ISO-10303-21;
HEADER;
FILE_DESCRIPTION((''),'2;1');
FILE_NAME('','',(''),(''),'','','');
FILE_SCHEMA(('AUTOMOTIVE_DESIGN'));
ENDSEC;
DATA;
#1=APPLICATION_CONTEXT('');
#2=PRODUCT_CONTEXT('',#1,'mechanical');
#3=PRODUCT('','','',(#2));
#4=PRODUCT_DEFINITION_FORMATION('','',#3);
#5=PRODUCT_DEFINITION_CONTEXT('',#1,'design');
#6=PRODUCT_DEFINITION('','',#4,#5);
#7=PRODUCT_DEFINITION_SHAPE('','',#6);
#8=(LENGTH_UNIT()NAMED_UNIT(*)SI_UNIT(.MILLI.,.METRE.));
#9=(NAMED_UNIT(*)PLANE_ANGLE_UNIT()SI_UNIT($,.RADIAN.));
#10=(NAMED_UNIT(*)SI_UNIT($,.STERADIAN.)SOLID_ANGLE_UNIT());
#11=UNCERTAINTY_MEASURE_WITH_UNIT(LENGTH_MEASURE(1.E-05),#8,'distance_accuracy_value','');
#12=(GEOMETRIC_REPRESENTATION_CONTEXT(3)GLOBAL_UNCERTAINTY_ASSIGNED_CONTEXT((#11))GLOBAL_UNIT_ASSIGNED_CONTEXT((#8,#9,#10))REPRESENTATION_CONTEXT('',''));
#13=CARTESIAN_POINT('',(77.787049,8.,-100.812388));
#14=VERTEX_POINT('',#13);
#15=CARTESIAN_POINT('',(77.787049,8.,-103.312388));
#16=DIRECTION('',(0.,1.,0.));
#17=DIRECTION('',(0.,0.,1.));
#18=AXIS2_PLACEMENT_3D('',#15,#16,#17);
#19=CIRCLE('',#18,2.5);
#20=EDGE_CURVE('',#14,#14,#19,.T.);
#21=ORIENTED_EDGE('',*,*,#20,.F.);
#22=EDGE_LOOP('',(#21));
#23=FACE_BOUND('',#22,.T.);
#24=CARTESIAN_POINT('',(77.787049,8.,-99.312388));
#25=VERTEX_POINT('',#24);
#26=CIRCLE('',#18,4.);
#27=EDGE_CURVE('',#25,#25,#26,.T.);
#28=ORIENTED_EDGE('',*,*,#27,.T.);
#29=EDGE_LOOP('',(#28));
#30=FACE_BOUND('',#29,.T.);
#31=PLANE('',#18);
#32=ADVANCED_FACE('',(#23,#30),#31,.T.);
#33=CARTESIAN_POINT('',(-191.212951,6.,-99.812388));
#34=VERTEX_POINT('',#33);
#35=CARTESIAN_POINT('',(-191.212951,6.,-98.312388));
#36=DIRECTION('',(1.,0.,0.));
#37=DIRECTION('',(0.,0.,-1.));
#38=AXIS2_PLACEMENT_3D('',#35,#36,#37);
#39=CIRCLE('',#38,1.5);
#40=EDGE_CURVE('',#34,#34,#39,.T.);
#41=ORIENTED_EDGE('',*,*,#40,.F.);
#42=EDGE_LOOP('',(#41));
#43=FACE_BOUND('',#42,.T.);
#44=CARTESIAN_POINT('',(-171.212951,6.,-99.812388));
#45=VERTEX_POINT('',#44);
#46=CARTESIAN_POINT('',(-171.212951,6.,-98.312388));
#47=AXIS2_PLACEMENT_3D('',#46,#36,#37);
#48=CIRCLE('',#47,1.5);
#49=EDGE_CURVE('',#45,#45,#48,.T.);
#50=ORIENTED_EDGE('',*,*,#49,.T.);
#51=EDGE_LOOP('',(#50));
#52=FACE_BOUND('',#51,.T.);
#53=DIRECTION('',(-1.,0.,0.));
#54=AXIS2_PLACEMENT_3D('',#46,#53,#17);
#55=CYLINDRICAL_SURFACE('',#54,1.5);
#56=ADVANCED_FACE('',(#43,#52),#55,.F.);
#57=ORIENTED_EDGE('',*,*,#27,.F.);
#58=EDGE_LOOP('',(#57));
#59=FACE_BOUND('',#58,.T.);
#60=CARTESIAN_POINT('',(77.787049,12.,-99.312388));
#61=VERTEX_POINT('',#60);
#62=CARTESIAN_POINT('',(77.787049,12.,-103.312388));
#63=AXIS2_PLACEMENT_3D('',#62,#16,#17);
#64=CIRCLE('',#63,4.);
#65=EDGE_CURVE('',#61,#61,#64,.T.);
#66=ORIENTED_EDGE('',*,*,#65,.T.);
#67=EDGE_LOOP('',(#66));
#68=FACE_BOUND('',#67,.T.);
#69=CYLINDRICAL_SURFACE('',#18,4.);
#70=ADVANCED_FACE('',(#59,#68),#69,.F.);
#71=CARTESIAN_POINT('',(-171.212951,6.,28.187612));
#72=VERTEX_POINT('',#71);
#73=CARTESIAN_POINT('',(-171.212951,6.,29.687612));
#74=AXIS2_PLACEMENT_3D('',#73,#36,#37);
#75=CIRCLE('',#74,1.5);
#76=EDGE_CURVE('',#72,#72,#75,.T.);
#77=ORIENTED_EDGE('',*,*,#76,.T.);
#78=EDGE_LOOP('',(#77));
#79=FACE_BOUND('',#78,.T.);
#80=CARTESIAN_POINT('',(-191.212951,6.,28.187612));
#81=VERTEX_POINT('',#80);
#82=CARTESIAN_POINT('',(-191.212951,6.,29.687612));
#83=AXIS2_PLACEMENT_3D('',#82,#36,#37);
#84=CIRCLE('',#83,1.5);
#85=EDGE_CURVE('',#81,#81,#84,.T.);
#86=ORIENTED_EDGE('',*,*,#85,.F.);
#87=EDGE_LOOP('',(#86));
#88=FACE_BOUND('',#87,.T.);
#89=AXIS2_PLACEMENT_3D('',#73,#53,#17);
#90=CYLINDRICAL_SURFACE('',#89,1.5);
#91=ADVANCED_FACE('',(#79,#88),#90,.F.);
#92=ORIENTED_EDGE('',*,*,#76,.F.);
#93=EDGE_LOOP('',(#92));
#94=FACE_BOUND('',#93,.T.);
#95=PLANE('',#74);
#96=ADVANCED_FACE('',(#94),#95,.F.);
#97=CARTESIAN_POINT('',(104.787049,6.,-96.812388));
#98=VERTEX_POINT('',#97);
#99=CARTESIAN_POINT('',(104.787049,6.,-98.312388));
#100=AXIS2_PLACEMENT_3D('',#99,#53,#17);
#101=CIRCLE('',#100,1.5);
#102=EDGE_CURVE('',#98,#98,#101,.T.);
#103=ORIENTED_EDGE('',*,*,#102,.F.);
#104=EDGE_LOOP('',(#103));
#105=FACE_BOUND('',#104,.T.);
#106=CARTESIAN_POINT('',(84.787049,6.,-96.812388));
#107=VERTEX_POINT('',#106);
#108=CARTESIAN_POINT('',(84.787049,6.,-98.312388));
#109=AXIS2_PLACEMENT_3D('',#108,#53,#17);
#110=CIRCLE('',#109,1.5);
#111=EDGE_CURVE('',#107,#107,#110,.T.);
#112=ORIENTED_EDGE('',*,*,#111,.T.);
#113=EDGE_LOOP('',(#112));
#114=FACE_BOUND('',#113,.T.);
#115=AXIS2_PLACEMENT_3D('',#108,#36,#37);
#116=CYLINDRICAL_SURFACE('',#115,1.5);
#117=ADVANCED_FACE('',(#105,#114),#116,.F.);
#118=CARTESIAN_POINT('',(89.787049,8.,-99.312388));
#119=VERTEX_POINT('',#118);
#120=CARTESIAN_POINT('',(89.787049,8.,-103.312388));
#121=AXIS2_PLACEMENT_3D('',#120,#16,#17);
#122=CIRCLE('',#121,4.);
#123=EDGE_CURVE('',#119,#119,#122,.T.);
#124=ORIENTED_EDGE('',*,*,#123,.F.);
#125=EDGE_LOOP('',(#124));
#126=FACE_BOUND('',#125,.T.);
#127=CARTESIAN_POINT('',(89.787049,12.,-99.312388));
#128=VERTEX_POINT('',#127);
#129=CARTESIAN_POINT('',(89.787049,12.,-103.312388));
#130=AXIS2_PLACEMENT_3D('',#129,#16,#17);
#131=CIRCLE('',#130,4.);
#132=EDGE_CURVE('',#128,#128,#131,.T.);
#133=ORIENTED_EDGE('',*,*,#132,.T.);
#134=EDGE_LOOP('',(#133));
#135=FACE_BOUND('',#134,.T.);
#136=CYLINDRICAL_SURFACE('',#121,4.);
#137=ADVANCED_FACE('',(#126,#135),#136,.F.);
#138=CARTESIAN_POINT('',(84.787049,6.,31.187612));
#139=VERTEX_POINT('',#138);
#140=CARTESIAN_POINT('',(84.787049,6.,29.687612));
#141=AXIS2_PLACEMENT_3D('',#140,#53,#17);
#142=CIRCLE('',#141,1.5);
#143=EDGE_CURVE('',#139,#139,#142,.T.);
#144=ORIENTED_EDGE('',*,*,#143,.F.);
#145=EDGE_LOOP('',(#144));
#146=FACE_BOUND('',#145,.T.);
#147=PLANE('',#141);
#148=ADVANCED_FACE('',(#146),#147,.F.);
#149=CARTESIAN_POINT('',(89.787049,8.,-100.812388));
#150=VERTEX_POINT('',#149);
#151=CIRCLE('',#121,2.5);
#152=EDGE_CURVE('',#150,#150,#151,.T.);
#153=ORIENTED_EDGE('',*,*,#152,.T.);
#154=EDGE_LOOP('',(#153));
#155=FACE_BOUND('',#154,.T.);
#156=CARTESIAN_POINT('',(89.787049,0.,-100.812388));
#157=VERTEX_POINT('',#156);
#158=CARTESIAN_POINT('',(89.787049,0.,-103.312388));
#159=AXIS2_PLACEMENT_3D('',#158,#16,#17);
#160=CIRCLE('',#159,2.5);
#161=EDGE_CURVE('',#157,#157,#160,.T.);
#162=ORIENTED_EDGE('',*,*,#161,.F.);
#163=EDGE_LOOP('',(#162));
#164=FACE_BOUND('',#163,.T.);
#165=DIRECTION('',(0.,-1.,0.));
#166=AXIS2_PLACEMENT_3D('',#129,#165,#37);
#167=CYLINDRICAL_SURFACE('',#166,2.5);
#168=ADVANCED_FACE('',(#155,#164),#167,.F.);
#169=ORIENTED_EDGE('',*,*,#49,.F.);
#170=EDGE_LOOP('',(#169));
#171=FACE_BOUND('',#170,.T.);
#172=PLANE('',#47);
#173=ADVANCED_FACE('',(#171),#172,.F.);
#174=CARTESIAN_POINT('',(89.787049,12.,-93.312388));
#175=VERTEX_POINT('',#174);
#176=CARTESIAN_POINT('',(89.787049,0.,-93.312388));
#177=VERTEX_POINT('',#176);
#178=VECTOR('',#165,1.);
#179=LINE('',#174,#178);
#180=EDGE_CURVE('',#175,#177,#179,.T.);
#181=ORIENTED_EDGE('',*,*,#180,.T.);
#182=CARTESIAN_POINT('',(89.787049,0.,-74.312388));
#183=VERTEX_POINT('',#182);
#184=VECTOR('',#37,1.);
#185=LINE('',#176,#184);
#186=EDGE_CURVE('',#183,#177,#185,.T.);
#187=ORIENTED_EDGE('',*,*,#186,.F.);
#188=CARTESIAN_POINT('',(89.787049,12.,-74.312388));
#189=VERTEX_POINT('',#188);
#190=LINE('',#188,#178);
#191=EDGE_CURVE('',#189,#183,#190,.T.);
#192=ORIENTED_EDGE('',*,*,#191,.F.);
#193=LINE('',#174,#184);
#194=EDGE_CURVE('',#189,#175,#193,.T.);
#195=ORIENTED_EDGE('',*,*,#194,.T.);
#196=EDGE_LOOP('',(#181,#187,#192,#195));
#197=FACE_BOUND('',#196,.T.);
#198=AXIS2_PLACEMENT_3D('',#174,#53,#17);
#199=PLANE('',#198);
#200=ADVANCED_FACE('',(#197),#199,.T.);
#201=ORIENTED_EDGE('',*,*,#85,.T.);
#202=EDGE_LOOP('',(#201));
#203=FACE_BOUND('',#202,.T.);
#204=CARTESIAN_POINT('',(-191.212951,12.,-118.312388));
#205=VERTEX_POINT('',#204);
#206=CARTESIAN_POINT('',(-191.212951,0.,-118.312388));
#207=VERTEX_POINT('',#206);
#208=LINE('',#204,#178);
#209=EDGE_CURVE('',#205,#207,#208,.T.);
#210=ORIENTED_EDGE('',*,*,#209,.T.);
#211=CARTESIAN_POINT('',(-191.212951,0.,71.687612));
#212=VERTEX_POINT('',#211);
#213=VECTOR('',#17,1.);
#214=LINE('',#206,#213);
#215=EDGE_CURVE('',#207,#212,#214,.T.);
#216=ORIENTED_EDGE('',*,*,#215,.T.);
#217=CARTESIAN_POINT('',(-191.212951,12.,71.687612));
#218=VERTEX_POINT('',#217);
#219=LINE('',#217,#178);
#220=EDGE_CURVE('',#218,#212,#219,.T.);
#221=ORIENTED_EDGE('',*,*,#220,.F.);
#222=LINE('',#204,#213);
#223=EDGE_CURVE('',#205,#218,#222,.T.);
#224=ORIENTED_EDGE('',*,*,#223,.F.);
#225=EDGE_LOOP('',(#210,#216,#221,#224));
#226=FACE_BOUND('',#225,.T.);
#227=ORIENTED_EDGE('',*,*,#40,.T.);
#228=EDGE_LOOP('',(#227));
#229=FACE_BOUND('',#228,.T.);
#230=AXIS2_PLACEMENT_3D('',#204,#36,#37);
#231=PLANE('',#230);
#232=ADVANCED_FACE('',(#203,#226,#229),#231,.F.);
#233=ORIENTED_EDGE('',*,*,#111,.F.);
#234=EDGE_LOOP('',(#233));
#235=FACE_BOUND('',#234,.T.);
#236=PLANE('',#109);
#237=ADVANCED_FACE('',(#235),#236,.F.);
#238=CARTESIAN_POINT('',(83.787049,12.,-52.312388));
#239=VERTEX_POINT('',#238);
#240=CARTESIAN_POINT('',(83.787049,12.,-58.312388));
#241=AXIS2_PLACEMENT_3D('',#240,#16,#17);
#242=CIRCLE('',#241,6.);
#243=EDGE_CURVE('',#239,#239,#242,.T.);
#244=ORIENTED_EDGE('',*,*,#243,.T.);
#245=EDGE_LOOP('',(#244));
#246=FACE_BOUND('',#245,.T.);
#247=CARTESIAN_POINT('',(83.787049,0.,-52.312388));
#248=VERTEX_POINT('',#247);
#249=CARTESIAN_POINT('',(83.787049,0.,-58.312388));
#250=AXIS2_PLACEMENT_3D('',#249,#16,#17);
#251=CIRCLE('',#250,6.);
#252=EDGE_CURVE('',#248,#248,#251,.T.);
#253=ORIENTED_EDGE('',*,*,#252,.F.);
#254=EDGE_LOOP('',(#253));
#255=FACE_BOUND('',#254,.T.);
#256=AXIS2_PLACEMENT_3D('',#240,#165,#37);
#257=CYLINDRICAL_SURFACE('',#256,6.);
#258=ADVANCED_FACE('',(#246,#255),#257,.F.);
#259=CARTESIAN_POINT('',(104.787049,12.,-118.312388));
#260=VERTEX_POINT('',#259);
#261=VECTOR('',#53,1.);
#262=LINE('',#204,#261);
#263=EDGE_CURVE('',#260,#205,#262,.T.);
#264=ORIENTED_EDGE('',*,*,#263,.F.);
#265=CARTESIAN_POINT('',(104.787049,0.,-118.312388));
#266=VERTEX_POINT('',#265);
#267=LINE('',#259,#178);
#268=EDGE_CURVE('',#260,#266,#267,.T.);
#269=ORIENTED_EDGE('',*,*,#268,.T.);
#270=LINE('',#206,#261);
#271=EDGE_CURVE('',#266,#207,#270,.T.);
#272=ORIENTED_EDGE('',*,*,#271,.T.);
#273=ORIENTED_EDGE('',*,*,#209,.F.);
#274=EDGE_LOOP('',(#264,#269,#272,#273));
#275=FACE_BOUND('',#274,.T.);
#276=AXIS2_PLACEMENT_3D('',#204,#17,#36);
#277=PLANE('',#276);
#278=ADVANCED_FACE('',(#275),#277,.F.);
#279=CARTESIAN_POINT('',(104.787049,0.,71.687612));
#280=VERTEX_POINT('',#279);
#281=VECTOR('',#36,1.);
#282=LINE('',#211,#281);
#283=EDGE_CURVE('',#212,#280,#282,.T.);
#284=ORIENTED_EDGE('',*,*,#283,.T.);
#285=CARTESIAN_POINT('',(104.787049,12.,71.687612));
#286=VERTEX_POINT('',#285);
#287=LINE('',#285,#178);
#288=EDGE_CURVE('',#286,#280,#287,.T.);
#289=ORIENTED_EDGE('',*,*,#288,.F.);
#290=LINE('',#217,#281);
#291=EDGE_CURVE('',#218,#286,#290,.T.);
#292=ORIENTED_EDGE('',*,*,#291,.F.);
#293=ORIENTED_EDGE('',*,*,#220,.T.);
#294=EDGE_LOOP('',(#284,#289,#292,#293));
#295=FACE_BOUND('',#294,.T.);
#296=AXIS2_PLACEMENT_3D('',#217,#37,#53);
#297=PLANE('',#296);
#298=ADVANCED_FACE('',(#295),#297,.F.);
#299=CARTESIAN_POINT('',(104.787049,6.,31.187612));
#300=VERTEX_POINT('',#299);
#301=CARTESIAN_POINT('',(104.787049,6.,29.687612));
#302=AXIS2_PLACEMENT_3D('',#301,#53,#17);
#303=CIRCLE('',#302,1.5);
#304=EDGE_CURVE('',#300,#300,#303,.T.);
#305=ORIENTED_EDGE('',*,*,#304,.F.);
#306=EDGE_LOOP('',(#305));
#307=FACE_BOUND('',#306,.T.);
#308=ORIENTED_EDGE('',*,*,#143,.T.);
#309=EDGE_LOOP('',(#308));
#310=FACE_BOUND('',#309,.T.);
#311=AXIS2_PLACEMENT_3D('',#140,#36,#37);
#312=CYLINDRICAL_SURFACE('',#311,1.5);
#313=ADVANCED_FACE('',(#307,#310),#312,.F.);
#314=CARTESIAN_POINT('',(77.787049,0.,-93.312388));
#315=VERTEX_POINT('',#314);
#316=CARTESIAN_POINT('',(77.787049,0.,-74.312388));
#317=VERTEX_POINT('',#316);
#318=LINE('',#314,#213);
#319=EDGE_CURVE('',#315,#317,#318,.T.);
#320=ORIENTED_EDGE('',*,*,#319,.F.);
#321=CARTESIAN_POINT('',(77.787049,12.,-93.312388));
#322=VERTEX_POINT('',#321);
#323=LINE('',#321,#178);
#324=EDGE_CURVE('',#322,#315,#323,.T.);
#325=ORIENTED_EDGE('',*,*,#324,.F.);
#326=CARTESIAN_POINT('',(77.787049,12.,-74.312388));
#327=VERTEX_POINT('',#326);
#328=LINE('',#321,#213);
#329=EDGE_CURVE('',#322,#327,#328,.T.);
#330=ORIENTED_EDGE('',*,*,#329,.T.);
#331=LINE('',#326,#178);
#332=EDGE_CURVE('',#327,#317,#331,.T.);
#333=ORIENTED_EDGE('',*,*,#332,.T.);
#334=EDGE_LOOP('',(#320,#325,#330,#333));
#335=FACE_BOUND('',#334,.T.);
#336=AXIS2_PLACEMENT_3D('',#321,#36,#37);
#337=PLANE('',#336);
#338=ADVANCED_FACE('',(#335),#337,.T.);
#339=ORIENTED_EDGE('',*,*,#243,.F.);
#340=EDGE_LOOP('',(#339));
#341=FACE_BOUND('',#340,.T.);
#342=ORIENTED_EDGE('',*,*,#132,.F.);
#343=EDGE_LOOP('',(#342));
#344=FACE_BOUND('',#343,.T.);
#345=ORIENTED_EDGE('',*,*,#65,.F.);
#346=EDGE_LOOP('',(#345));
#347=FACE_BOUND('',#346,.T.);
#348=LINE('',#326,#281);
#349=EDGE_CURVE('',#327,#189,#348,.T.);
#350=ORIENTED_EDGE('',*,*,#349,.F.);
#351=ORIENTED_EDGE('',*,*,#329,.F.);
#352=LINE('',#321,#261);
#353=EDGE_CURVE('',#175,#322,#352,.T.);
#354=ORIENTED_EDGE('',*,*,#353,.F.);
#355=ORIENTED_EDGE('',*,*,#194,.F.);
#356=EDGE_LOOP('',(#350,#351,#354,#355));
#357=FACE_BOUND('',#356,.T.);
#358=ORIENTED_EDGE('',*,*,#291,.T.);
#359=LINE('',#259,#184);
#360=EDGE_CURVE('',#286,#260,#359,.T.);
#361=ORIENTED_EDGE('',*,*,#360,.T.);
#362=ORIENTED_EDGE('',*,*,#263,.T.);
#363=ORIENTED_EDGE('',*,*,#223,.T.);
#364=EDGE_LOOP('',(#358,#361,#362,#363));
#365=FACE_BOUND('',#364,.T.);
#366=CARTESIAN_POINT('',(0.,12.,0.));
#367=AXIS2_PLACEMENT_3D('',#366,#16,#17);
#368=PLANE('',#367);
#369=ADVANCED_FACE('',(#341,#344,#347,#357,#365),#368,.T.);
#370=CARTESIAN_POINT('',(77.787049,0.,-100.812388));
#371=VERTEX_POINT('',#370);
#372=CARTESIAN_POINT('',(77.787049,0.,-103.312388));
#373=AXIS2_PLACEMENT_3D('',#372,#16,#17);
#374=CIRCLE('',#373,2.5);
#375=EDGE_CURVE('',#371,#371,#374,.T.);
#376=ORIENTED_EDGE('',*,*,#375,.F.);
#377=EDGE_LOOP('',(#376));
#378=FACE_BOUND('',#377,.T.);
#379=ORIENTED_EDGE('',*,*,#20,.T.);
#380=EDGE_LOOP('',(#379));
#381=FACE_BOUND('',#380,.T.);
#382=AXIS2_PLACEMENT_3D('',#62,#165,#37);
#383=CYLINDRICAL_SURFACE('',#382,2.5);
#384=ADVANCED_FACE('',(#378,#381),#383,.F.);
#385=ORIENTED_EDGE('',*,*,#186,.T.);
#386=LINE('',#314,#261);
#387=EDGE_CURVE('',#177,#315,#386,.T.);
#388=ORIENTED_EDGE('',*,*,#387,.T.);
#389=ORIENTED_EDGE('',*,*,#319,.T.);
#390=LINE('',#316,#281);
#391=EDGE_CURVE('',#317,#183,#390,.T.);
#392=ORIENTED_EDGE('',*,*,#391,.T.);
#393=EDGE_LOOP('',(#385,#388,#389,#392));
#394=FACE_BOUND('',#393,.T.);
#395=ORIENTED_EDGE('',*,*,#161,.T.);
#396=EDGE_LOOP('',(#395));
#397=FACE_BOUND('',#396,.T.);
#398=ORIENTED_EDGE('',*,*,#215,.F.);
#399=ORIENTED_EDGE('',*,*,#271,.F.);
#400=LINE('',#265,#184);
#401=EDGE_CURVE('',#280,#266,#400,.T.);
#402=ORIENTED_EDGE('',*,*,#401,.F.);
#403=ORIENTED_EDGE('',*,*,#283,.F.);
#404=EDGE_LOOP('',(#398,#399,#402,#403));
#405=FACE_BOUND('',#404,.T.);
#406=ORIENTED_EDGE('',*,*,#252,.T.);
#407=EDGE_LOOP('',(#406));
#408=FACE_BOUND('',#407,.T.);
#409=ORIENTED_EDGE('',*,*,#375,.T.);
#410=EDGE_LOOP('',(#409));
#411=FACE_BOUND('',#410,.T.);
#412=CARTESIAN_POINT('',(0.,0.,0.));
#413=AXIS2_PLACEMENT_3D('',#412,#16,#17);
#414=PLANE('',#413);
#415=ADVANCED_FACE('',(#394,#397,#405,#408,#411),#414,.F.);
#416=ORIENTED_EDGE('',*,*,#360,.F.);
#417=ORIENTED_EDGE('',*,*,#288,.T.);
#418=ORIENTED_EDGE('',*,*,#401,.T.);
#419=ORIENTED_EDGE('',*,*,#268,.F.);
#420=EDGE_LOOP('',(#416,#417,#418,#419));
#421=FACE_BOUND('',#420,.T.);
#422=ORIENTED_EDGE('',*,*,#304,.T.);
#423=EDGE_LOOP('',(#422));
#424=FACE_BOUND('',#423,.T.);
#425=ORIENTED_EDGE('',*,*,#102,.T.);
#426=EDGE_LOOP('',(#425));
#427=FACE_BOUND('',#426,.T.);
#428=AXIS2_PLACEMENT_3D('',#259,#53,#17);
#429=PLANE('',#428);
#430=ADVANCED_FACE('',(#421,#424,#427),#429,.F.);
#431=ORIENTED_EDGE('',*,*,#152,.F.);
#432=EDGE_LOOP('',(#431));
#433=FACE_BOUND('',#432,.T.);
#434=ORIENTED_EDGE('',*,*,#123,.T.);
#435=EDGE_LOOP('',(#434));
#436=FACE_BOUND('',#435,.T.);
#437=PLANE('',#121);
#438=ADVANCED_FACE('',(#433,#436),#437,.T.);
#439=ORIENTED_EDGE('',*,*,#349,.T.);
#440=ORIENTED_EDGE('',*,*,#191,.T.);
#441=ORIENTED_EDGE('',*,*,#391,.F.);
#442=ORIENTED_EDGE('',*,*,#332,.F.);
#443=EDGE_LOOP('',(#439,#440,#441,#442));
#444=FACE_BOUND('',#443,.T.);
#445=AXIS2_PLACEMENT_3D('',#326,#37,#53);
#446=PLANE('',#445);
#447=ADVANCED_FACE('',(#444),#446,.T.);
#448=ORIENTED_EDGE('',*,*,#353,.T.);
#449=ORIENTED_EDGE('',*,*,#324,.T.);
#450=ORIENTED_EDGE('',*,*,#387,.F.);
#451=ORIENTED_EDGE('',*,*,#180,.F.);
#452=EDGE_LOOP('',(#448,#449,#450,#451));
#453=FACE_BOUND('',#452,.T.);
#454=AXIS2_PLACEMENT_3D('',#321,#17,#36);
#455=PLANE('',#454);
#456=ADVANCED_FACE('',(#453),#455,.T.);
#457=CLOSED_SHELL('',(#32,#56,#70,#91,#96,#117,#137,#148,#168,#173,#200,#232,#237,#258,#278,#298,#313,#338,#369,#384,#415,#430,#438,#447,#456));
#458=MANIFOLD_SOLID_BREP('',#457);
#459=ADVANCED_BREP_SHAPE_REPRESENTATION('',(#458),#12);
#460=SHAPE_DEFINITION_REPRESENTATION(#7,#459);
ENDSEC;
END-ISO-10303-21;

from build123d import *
from OCP.BRepAlgoAPI import BRepAlgoAPI_Cut
from OCP.TopTools import TopTools_ListOfShape

# Parameters (mm, degrees)
SKETCH1_W           = 296
SKETCH1_H           = 190
SKETCH1_R           = 6
SKETCH1_R_2         = 2.5
SKETCH1_W_2         = 12
SKETCH1_H_2         = 19
BOSS_EXTRUDE1_DEPTH = 12
CUT_EXTRUDE2_START  = 104.787049
SKETCH3_R           = 1.5
CUT_EXTRUDE2_DEPTH  = 20
CUT_EXTRUDE3_START  = -171.212951
SKETCH3_2_R         = 1.5
CUT_EXTRUDE3_DEPTH  = 20
CUT_EXTRUDE4_START  = 12
SKETCH4_R           = 4
CUT_EXTRUDE4_DEPTH  = 4


with BuildPart() as part:
    # Sketch1 → Boss-Extrude1 (new body)
    with BuildSketch(Plane(origin=(0, 0, 0), x_dir=(1, 0, 0), z_dir=(0, 1, 0))):
        with Locations((-43.212950637, 23.312387878)):
            Rectangle(SKETCH1_W, SKETCH1_H)
        with Locations(Location((83.787049363, 58.312387878, 0), (0, 0, 270))):
            Circle(SKETCH1_R, mode=Mode.SUBTRACT)
        with Locations(Location((89.787049363, 103.312387878, 0), (0, 0, 270))):
            Circle(SKETCH1_R_2, mode=Mode.SUBTRACT)
        with Locations(Location((77.787049363, 103.312387878, 0), (0, 0, 270))):
            Circle(SKETCH1_R_2, mode=Mode.SUBTRACT)
        with Locations((83.787049363, 83.812387878)):
            Rectangle(SKETCH1_W_2, SKETCH1_H_2, mode=Mode.SUBTRACT)
    extrude(amount=BOSS_EXTRUDE1_DEPTH)


with BuildPart() as cut_extrude2_tool:
    # Sketch3 → Cut-Extrude2 (new body)
    with BuildSketch(Plane(origin=(0, 0, 0), x_dir=(0, 0, -1), z_dir=(1, 0, 0)).offset(CUT_EXTRUDE2_START)):
        with Locations(Location((98.312387878, 6, 0), (0, 0, 180))):
            Circle(SKETCH3_R)
        with Locations(Location((-29.687612122, 6, 0), (0, 0, 180))):
            Circle(SKETCH3_R)
    extrude(amount=-CUT_EXTRUDE2_DEPTH)


with BuildPart() as part_1:
    add(part.part)

    # Cut-Extrude2: cut by cut_extrude2_tool, with a tolerance
    cut_extrude2_stock = TopTools_ListOfShape()
    cut_extrude2_stock.Append(part_1.part.wrapped)
    cut_extrude2_tools = TopTools_ListOfShape()
    cut_extrude2_tools.Append(cut_extrude2_tool.part.wrapped)
    cut_extrude2_cut = BRepAlgoAPI_Cut()
    cut_extrude2_cut.SetArguments(cut_extrude2_stock)
    cut_extrude2_cut.SetTools(cut_extrude2_tools)
    cut_extrude2_cut.SetFuzzyValue(0.00001)
    cut_extrude2_cut.Build()
    add(Compound.cast(cut_extrude2_cut.Shape()).solids(), mode=Mode.REPLACE)

    # Sketch3<2> → Cut-Extrude3 (cut)
    with BuildSketch(Plane(origin=(0, 0, 0), x_dir=(0, 0, -1), z_dir=(1, 0, 0)).offset(CUT_EXTRUDE3_START)):
        with Locations(Location((98.312387878, 6, 0), (0, 0, 180))):
            Circle(SKETCH3_2_R)
        with Locations(Location((-29.687612122, 6, 0), (0, 0, 180))):
            Circle(SKETCH3_2_R)
    extrude(amount=-CUT_EXTRUDE3_DEPTH, mode=Mode.SUBTRACT)

    # Sketch4 → Cut-Extrude4 (cut)
    with BuildSketch(Plane(origin=(0, 0, 0), x_dir=(1, 0, 0), z_dir=(0, 1, 0)).offset(CUT_EXTRUDE4_START)):
        with Locations(Location((89.787049363, 103.312387878, 0), (0, 0, 270))):
            Circle(SKETCH4_R)
        with Locations(Location((77.787049363, 103.312387878, 0), (0, 0, 270))):
            Circle(SKETCH4_R)
    extrude(amount=-CUT_EXTRUDE4_DEPTH, mode=Mode.SUBTRACT)


solid = part_1.part
